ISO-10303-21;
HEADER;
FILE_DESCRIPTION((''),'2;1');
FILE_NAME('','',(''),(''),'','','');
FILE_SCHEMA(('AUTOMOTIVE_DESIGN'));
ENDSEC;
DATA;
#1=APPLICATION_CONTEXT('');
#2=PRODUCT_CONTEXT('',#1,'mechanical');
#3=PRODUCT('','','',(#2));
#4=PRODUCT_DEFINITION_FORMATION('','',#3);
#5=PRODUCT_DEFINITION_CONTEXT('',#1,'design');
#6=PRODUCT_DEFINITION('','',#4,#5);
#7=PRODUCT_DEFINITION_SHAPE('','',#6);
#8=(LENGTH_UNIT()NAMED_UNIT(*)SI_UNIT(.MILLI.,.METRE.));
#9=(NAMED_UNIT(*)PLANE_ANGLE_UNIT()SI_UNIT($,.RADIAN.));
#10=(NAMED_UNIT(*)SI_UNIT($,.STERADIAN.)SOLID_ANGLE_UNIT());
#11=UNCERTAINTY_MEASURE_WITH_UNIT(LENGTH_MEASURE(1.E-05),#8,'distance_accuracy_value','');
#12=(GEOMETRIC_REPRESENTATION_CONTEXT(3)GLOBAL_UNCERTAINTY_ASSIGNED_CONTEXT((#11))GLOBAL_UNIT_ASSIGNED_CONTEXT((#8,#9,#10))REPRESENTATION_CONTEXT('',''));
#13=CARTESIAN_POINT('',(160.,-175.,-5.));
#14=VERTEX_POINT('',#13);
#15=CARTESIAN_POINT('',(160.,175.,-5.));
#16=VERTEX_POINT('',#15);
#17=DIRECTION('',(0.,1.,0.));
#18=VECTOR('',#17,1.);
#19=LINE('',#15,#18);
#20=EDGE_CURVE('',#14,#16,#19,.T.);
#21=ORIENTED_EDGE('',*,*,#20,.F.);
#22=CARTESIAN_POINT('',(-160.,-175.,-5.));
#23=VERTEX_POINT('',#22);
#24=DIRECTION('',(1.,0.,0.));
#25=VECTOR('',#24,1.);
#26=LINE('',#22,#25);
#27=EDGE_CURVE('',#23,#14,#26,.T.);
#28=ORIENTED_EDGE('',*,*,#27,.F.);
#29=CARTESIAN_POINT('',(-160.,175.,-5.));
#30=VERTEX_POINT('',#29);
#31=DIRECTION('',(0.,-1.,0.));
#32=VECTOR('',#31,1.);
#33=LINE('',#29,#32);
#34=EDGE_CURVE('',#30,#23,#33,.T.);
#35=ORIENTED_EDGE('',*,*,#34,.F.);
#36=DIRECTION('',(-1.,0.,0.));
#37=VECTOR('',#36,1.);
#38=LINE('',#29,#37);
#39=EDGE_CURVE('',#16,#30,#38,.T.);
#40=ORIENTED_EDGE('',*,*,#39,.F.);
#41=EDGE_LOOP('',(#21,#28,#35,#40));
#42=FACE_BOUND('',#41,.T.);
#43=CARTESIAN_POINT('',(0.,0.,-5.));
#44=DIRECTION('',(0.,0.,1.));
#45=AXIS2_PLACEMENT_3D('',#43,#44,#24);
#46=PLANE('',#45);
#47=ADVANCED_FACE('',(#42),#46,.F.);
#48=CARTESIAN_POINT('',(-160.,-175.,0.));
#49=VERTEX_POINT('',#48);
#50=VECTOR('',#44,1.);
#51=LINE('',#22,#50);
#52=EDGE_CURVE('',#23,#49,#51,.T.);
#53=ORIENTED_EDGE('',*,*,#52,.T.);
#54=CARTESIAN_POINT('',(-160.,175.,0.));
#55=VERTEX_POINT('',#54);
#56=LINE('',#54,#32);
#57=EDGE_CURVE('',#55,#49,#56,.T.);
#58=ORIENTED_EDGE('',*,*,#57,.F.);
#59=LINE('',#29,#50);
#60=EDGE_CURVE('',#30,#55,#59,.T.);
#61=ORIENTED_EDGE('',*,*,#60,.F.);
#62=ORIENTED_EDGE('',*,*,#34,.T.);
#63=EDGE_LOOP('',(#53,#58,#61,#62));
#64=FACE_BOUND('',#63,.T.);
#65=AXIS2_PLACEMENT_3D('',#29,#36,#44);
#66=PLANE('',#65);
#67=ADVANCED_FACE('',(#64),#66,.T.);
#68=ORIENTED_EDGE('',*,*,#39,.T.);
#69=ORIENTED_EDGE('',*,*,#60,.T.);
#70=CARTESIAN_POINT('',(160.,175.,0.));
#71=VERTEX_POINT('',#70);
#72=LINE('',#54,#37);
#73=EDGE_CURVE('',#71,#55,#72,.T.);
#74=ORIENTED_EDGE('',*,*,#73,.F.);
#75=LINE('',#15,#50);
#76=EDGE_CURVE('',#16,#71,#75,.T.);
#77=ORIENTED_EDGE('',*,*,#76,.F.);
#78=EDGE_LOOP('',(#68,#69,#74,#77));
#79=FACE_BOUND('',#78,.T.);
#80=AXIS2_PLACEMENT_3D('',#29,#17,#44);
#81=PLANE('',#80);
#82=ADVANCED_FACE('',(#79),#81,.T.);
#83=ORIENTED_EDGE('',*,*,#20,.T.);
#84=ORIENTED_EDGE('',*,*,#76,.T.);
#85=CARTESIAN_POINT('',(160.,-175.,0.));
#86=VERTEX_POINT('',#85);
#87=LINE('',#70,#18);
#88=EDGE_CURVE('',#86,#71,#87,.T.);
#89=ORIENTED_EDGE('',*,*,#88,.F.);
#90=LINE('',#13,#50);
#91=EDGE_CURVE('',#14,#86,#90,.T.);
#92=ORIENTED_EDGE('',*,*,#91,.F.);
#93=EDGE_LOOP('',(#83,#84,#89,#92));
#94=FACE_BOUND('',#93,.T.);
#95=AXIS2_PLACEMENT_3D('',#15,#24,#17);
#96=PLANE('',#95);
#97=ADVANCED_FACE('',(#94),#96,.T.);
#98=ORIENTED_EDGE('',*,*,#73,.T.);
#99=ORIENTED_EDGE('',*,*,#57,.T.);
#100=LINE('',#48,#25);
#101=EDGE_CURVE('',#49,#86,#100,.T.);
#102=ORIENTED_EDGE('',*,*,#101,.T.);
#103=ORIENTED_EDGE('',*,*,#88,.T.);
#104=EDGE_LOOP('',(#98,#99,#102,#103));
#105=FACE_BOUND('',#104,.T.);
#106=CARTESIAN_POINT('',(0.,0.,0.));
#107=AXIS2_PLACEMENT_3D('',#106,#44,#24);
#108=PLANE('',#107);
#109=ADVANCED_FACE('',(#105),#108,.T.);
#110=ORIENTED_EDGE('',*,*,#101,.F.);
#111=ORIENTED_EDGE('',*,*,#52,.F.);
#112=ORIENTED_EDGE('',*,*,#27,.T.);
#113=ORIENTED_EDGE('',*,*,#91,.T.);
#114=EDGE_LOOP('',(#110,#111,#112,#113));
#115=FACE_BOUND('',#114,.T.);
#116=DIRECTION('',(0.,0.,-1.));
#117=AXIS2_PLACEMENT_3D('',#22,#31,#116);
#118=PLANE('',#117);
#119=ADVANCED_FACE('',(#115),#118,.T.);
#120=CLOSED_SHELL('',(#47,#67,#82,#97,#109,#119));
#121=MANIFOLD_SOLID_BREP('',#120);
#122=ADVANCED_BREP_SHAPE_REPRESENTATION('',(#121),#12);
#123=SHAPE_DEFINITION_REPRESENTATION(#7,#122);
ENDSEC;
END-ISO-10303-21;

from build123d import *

# Parameters (mm, degrees)
SKETCH1_W          = 320
SKETCH1_H          = 350
BASE_FLANGE1_DEPTH = 5


# Sheet-metal steps are written as plain solids
with BuildPart() as part:
    # Sketch1 → Base-Flange1 (new body)
    with BuildSketch(Plane.XY):
        Rectangle(SKETCH1_W, SKETCH1_H)
    extrude(amount=-BASE_FLANGE1_DEPTH)


solid = part.part
